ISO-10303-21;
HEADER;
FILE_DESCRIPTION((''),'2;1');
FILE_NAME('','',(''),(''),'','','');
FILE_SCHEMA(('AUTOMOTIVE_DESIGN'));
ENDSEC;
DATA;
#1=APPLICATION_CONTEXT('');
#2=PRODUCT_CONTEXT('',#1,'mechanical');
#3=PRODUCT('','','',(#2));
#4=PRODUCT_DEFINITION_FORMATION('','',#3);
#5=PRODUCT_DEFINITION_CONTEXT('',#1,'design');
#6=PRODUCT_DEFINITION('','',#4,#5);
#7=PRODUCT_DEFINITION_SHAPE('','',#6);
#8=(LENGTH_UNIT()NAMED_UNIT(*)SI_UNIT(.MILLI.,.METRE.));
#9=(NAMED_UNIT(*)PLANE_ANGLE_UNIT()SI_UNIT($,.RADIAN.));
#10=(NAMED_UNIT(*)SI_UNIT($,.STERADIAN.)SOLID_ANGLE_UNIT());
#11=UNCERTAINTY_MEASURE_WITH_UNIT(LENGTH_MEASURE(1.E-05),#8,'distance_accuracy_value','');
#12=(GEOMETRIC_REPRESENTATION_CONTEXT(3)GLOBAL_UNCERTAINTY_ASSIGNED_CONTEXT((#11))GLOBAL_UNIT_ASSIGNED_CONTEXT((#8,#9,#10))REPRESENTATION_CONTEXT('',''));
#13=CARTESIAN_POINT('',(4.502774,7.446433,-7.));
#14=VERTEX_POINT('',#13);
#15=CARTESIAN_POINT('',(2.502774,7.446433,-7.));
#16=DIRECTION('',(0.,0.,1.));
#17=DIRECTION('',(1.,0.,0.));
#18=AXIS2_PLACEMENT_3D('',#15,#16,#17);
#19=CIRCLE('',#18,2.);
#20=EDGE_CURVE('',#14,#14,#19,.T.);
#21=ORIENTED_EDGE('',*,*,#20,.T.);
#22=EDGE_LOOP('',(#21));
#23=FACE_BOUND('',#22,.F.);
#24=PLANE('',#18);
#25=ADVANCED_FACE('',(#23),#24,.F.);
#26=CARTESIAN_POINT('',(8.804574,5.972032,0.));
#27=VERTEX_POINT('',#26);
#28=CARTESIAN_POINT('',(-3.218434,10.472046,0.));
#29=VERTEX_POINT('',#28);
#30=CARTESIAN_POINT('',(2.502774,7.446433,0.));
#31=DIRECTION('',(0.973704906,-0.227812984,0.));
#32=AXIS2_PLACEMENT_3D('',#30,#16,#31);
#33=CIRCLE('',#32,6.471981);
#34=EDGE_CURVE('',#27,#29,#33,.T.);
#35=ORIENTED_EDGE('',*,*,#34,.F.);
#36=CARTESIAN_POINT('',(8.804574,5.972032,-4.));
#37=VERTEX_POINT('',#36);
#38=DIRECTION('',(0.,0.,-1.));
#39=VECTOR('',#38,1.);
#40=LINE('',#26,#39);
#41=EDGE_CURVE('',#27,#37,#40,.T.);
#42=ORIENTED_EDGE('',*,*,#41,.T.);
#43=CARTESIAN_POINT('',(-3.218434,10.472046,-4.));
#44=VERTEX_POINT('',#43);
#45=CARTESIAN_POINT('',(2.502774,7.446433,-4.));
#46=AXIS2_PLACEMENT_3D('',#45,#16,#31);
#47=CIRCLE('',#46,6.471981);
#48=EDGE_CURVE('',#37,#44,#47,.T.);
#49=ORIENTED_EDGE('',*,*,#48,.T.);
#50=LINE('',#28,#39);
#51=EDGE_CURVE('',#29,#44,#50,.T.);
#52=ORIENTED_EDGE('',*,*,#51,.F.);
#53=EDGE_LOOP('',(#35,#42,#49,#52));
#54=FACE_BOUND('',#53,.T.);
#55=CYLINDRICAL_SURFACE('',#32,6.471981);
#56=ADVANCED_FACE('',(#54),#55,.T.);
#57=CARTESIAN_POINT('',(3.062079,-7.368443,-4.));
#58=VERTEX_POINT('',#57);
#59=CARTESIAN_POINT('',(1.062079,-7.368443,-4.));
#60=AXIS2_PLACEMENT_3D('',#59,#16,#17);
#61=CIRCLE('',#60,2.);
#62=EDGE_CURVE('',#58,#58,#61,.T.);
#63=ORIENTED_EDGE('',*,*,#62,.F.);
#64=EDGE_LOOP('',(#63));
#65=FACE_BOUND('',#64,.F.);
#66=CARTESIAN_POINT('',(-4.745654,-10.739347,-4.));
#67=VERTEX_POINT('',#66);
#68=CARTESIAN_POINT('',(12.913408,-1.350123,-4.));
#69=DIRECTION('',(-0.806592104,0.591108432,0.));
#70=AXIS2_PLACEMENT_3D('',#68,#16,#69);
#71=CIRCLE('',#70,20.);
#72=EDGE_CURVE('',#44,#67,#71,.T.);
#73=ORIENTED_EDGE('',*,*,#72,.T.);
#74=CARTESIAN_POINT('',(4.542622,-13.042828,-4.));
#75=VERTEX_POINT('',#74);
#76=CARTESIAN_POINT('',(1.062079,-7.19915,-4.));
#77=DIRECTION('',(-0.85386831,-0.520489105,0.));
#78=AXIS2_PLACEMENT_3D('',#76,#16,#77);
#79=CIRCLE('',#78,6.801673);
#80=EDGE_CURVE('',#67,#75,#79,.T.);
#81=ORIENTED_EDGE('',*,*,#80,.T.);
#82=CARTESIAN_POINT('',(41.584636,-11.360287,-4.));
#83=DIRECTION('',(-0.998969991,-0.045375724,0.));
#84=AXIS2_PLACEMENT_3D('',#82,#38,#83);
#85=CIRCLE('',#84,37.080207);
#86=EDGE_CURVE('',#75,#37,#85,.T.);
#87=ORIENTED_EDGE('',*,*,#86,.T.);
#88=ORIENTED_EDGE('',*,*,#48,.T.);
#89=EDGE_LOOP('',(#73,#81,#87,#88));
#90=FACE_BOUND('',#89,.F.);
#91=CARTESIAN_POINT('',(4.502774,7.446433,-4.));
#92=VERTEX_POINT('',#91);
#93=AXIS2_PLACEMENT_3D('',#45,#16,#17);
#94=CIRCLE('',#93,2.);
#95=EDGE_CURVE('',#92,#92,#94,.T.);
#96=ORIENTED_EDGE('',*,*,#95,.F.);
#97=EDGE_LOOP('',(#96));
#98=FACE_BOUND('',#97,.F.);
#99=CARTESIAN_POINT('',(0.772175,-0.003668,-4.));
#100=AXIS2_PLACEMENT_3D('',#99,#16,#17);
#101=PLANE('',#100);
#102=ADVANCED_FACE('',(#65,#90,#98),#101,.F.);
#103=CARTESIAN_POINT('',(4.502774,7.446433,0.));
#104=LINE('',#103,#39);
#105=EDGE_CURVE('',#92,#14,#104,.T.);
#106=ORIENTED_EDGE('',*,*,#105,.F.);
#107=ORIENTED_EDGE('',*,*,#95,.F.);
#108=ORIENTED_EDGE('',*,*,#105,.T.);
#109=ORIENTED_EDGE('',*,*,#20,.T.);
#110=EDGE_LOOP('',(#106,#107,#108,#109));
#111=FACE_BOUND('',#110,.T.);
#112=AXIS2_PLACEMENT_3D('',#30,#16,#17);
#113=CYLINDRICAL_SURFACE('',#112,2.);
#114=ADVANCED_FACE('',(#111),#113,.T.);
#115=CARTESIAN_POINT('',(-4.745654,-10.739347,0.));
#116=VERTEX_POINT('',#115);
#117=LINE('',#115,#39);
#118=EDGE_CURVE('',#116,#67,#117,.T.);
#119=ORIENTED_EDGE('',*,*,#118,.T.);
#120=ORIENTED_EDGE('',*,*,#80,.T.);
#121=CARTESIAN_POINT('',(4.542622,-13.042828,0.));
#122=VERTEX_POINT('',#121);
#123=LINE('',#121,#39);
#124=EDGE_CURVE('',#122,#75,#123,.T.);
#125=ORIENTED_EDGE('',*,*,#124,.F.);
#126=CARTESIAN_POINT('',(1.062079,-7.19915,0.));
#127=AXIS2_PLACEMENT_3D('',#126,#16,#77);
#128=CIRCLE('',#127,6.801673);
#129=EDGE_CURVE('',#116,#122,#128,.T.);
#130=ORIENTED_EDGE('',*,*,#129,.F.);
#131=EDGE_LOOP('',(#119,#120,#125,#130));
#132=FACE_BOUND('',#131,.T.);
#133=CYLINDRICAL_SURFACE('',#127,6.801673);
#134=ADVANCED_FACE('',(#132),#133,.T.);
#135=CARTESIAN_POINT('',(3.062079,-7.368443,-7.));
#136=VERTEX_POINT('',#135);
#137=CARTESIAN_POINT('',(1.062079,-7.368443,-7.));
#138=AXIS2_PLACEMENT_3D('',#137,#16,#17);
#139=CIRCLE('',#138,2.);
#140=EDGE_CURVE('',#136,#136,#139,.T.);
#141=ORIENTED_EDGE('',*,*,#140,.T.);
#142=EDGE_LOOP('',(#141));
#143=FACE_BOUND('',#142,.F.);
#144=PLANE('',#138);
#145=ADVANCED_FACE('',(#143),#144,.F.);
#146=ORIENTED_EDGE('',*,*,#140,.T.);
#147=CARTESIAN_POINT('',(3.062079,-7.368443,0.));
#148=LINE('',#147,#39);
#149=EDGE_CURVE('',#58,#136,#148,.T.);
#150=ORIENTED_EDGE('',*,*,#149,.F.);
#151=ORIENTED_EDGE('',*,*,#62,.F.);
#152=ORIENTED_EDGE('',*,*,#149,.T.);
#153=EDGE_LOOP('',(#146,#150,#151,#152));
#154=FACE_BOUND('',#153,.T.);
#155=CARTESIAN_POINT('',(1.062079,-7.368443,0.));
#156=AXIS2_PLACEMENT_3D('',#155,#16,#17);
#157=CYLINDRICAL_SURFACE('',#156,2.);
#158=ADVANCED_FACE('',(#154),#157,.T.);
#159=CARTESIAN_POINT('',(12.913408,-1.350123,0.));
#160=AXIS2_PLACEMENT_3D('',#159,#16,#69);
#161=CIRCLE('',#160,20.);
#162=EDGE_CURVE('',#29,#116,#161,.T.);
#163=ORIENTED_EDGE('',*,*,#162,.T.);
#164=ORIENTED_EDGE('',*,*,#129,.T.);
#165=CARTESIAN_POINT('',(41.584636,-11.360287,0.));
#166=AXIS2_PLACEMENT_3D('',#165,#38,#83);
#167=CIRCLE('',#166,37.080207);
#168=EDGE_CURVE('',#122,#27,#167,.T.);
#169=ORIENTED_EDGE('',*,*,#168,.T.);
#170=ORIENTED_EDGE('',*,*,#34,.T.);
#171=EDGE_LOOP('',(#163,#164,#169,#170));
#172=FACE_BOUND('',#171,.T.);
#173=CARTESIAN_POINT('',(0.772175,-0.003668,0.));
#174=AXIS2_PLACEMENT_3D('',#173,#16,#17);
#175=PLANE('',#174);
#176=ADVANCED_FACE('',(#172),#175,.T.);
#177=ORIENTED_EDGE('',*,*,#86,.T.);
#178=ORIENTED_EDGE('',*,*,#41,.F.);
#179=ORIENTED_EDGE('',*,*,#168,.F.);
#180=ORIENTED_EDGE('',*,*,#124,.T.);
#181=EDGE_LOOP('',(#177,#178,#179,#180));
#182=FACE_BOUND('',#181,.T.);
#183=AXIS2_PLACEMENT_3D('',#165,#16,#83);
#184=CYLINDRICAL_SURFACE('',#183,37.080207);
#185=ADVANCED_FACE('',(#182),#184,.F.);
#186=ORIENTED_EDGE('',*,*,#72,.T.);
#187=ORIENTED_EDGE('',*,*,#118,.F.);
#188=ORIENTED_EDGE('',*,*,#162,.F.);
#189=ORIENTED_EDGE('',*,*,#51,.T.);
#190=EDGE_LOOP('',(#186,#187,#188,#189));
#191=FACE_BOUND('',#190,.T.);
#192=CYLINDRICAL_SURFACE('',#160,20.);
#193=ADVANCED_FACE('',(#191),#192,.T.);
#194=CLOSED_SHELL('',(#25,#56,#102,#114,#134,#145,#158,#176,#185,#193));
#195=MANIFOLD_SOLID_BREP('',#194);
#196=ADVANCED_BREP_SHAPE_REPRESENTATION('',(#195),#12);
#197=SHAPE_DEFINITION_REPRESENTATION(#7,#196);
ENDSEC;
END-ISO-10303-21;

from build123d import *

# Parameters (mm, degrees)
F0_R     = 2
F1_DEPTH = 4
F2_DEPTH = 7


# Not quite as in the source:
# - a feature names something its author has since deleted; it is built from what else it names


with BuildPart() as f1:
    # F0 (on Top) → F1 (new body)
    with BuildSketch(Plane.XY):
        with BuildLine():
            ThreePointArc((8.8045736775, 5.9720319696), (4.7714301194, 13.5077650507), (-3.2184339135, 10.47204557))
            ThreePointArc((-3.2184339135, 10.47204557), (-7.0349525259, 0.086158841), (-4.7456540833, -10.739346695))
            ThreePointArc((-4.7456540833, -10.739346695), (-0.5751322141, -13.8008387314), (4.5426217839, -13.0428280681))
            ThreePointArc((4.5426217839, -13.0428280681), (5.4021565515, -3.2504198201), (8.8045736775, 5.9720319696))
        make_face()
        with Locations((1.0620787063, -7.3684426025)):
            Circle(F0_R, mode=Mode.SUBTRACT)
        with Locations((2.5027735673, 7.4464333818)):
            Circle(F0_R, mode=Mode.SUBTRACT)
    extrude(amount=-F1_DEPTH)

    # F0 (on Top) → F2 (join)
    with BuildSketch(Plane.XY):
        with Locations((2.5027735673, 7.4464333818)):
            Circle(F0_R)
        with Locations((1.0620787063, -7.3684426025)):
            Circle(F0_R)
    extrude(amount=-F2_DEPTH)


solid = f1.part
